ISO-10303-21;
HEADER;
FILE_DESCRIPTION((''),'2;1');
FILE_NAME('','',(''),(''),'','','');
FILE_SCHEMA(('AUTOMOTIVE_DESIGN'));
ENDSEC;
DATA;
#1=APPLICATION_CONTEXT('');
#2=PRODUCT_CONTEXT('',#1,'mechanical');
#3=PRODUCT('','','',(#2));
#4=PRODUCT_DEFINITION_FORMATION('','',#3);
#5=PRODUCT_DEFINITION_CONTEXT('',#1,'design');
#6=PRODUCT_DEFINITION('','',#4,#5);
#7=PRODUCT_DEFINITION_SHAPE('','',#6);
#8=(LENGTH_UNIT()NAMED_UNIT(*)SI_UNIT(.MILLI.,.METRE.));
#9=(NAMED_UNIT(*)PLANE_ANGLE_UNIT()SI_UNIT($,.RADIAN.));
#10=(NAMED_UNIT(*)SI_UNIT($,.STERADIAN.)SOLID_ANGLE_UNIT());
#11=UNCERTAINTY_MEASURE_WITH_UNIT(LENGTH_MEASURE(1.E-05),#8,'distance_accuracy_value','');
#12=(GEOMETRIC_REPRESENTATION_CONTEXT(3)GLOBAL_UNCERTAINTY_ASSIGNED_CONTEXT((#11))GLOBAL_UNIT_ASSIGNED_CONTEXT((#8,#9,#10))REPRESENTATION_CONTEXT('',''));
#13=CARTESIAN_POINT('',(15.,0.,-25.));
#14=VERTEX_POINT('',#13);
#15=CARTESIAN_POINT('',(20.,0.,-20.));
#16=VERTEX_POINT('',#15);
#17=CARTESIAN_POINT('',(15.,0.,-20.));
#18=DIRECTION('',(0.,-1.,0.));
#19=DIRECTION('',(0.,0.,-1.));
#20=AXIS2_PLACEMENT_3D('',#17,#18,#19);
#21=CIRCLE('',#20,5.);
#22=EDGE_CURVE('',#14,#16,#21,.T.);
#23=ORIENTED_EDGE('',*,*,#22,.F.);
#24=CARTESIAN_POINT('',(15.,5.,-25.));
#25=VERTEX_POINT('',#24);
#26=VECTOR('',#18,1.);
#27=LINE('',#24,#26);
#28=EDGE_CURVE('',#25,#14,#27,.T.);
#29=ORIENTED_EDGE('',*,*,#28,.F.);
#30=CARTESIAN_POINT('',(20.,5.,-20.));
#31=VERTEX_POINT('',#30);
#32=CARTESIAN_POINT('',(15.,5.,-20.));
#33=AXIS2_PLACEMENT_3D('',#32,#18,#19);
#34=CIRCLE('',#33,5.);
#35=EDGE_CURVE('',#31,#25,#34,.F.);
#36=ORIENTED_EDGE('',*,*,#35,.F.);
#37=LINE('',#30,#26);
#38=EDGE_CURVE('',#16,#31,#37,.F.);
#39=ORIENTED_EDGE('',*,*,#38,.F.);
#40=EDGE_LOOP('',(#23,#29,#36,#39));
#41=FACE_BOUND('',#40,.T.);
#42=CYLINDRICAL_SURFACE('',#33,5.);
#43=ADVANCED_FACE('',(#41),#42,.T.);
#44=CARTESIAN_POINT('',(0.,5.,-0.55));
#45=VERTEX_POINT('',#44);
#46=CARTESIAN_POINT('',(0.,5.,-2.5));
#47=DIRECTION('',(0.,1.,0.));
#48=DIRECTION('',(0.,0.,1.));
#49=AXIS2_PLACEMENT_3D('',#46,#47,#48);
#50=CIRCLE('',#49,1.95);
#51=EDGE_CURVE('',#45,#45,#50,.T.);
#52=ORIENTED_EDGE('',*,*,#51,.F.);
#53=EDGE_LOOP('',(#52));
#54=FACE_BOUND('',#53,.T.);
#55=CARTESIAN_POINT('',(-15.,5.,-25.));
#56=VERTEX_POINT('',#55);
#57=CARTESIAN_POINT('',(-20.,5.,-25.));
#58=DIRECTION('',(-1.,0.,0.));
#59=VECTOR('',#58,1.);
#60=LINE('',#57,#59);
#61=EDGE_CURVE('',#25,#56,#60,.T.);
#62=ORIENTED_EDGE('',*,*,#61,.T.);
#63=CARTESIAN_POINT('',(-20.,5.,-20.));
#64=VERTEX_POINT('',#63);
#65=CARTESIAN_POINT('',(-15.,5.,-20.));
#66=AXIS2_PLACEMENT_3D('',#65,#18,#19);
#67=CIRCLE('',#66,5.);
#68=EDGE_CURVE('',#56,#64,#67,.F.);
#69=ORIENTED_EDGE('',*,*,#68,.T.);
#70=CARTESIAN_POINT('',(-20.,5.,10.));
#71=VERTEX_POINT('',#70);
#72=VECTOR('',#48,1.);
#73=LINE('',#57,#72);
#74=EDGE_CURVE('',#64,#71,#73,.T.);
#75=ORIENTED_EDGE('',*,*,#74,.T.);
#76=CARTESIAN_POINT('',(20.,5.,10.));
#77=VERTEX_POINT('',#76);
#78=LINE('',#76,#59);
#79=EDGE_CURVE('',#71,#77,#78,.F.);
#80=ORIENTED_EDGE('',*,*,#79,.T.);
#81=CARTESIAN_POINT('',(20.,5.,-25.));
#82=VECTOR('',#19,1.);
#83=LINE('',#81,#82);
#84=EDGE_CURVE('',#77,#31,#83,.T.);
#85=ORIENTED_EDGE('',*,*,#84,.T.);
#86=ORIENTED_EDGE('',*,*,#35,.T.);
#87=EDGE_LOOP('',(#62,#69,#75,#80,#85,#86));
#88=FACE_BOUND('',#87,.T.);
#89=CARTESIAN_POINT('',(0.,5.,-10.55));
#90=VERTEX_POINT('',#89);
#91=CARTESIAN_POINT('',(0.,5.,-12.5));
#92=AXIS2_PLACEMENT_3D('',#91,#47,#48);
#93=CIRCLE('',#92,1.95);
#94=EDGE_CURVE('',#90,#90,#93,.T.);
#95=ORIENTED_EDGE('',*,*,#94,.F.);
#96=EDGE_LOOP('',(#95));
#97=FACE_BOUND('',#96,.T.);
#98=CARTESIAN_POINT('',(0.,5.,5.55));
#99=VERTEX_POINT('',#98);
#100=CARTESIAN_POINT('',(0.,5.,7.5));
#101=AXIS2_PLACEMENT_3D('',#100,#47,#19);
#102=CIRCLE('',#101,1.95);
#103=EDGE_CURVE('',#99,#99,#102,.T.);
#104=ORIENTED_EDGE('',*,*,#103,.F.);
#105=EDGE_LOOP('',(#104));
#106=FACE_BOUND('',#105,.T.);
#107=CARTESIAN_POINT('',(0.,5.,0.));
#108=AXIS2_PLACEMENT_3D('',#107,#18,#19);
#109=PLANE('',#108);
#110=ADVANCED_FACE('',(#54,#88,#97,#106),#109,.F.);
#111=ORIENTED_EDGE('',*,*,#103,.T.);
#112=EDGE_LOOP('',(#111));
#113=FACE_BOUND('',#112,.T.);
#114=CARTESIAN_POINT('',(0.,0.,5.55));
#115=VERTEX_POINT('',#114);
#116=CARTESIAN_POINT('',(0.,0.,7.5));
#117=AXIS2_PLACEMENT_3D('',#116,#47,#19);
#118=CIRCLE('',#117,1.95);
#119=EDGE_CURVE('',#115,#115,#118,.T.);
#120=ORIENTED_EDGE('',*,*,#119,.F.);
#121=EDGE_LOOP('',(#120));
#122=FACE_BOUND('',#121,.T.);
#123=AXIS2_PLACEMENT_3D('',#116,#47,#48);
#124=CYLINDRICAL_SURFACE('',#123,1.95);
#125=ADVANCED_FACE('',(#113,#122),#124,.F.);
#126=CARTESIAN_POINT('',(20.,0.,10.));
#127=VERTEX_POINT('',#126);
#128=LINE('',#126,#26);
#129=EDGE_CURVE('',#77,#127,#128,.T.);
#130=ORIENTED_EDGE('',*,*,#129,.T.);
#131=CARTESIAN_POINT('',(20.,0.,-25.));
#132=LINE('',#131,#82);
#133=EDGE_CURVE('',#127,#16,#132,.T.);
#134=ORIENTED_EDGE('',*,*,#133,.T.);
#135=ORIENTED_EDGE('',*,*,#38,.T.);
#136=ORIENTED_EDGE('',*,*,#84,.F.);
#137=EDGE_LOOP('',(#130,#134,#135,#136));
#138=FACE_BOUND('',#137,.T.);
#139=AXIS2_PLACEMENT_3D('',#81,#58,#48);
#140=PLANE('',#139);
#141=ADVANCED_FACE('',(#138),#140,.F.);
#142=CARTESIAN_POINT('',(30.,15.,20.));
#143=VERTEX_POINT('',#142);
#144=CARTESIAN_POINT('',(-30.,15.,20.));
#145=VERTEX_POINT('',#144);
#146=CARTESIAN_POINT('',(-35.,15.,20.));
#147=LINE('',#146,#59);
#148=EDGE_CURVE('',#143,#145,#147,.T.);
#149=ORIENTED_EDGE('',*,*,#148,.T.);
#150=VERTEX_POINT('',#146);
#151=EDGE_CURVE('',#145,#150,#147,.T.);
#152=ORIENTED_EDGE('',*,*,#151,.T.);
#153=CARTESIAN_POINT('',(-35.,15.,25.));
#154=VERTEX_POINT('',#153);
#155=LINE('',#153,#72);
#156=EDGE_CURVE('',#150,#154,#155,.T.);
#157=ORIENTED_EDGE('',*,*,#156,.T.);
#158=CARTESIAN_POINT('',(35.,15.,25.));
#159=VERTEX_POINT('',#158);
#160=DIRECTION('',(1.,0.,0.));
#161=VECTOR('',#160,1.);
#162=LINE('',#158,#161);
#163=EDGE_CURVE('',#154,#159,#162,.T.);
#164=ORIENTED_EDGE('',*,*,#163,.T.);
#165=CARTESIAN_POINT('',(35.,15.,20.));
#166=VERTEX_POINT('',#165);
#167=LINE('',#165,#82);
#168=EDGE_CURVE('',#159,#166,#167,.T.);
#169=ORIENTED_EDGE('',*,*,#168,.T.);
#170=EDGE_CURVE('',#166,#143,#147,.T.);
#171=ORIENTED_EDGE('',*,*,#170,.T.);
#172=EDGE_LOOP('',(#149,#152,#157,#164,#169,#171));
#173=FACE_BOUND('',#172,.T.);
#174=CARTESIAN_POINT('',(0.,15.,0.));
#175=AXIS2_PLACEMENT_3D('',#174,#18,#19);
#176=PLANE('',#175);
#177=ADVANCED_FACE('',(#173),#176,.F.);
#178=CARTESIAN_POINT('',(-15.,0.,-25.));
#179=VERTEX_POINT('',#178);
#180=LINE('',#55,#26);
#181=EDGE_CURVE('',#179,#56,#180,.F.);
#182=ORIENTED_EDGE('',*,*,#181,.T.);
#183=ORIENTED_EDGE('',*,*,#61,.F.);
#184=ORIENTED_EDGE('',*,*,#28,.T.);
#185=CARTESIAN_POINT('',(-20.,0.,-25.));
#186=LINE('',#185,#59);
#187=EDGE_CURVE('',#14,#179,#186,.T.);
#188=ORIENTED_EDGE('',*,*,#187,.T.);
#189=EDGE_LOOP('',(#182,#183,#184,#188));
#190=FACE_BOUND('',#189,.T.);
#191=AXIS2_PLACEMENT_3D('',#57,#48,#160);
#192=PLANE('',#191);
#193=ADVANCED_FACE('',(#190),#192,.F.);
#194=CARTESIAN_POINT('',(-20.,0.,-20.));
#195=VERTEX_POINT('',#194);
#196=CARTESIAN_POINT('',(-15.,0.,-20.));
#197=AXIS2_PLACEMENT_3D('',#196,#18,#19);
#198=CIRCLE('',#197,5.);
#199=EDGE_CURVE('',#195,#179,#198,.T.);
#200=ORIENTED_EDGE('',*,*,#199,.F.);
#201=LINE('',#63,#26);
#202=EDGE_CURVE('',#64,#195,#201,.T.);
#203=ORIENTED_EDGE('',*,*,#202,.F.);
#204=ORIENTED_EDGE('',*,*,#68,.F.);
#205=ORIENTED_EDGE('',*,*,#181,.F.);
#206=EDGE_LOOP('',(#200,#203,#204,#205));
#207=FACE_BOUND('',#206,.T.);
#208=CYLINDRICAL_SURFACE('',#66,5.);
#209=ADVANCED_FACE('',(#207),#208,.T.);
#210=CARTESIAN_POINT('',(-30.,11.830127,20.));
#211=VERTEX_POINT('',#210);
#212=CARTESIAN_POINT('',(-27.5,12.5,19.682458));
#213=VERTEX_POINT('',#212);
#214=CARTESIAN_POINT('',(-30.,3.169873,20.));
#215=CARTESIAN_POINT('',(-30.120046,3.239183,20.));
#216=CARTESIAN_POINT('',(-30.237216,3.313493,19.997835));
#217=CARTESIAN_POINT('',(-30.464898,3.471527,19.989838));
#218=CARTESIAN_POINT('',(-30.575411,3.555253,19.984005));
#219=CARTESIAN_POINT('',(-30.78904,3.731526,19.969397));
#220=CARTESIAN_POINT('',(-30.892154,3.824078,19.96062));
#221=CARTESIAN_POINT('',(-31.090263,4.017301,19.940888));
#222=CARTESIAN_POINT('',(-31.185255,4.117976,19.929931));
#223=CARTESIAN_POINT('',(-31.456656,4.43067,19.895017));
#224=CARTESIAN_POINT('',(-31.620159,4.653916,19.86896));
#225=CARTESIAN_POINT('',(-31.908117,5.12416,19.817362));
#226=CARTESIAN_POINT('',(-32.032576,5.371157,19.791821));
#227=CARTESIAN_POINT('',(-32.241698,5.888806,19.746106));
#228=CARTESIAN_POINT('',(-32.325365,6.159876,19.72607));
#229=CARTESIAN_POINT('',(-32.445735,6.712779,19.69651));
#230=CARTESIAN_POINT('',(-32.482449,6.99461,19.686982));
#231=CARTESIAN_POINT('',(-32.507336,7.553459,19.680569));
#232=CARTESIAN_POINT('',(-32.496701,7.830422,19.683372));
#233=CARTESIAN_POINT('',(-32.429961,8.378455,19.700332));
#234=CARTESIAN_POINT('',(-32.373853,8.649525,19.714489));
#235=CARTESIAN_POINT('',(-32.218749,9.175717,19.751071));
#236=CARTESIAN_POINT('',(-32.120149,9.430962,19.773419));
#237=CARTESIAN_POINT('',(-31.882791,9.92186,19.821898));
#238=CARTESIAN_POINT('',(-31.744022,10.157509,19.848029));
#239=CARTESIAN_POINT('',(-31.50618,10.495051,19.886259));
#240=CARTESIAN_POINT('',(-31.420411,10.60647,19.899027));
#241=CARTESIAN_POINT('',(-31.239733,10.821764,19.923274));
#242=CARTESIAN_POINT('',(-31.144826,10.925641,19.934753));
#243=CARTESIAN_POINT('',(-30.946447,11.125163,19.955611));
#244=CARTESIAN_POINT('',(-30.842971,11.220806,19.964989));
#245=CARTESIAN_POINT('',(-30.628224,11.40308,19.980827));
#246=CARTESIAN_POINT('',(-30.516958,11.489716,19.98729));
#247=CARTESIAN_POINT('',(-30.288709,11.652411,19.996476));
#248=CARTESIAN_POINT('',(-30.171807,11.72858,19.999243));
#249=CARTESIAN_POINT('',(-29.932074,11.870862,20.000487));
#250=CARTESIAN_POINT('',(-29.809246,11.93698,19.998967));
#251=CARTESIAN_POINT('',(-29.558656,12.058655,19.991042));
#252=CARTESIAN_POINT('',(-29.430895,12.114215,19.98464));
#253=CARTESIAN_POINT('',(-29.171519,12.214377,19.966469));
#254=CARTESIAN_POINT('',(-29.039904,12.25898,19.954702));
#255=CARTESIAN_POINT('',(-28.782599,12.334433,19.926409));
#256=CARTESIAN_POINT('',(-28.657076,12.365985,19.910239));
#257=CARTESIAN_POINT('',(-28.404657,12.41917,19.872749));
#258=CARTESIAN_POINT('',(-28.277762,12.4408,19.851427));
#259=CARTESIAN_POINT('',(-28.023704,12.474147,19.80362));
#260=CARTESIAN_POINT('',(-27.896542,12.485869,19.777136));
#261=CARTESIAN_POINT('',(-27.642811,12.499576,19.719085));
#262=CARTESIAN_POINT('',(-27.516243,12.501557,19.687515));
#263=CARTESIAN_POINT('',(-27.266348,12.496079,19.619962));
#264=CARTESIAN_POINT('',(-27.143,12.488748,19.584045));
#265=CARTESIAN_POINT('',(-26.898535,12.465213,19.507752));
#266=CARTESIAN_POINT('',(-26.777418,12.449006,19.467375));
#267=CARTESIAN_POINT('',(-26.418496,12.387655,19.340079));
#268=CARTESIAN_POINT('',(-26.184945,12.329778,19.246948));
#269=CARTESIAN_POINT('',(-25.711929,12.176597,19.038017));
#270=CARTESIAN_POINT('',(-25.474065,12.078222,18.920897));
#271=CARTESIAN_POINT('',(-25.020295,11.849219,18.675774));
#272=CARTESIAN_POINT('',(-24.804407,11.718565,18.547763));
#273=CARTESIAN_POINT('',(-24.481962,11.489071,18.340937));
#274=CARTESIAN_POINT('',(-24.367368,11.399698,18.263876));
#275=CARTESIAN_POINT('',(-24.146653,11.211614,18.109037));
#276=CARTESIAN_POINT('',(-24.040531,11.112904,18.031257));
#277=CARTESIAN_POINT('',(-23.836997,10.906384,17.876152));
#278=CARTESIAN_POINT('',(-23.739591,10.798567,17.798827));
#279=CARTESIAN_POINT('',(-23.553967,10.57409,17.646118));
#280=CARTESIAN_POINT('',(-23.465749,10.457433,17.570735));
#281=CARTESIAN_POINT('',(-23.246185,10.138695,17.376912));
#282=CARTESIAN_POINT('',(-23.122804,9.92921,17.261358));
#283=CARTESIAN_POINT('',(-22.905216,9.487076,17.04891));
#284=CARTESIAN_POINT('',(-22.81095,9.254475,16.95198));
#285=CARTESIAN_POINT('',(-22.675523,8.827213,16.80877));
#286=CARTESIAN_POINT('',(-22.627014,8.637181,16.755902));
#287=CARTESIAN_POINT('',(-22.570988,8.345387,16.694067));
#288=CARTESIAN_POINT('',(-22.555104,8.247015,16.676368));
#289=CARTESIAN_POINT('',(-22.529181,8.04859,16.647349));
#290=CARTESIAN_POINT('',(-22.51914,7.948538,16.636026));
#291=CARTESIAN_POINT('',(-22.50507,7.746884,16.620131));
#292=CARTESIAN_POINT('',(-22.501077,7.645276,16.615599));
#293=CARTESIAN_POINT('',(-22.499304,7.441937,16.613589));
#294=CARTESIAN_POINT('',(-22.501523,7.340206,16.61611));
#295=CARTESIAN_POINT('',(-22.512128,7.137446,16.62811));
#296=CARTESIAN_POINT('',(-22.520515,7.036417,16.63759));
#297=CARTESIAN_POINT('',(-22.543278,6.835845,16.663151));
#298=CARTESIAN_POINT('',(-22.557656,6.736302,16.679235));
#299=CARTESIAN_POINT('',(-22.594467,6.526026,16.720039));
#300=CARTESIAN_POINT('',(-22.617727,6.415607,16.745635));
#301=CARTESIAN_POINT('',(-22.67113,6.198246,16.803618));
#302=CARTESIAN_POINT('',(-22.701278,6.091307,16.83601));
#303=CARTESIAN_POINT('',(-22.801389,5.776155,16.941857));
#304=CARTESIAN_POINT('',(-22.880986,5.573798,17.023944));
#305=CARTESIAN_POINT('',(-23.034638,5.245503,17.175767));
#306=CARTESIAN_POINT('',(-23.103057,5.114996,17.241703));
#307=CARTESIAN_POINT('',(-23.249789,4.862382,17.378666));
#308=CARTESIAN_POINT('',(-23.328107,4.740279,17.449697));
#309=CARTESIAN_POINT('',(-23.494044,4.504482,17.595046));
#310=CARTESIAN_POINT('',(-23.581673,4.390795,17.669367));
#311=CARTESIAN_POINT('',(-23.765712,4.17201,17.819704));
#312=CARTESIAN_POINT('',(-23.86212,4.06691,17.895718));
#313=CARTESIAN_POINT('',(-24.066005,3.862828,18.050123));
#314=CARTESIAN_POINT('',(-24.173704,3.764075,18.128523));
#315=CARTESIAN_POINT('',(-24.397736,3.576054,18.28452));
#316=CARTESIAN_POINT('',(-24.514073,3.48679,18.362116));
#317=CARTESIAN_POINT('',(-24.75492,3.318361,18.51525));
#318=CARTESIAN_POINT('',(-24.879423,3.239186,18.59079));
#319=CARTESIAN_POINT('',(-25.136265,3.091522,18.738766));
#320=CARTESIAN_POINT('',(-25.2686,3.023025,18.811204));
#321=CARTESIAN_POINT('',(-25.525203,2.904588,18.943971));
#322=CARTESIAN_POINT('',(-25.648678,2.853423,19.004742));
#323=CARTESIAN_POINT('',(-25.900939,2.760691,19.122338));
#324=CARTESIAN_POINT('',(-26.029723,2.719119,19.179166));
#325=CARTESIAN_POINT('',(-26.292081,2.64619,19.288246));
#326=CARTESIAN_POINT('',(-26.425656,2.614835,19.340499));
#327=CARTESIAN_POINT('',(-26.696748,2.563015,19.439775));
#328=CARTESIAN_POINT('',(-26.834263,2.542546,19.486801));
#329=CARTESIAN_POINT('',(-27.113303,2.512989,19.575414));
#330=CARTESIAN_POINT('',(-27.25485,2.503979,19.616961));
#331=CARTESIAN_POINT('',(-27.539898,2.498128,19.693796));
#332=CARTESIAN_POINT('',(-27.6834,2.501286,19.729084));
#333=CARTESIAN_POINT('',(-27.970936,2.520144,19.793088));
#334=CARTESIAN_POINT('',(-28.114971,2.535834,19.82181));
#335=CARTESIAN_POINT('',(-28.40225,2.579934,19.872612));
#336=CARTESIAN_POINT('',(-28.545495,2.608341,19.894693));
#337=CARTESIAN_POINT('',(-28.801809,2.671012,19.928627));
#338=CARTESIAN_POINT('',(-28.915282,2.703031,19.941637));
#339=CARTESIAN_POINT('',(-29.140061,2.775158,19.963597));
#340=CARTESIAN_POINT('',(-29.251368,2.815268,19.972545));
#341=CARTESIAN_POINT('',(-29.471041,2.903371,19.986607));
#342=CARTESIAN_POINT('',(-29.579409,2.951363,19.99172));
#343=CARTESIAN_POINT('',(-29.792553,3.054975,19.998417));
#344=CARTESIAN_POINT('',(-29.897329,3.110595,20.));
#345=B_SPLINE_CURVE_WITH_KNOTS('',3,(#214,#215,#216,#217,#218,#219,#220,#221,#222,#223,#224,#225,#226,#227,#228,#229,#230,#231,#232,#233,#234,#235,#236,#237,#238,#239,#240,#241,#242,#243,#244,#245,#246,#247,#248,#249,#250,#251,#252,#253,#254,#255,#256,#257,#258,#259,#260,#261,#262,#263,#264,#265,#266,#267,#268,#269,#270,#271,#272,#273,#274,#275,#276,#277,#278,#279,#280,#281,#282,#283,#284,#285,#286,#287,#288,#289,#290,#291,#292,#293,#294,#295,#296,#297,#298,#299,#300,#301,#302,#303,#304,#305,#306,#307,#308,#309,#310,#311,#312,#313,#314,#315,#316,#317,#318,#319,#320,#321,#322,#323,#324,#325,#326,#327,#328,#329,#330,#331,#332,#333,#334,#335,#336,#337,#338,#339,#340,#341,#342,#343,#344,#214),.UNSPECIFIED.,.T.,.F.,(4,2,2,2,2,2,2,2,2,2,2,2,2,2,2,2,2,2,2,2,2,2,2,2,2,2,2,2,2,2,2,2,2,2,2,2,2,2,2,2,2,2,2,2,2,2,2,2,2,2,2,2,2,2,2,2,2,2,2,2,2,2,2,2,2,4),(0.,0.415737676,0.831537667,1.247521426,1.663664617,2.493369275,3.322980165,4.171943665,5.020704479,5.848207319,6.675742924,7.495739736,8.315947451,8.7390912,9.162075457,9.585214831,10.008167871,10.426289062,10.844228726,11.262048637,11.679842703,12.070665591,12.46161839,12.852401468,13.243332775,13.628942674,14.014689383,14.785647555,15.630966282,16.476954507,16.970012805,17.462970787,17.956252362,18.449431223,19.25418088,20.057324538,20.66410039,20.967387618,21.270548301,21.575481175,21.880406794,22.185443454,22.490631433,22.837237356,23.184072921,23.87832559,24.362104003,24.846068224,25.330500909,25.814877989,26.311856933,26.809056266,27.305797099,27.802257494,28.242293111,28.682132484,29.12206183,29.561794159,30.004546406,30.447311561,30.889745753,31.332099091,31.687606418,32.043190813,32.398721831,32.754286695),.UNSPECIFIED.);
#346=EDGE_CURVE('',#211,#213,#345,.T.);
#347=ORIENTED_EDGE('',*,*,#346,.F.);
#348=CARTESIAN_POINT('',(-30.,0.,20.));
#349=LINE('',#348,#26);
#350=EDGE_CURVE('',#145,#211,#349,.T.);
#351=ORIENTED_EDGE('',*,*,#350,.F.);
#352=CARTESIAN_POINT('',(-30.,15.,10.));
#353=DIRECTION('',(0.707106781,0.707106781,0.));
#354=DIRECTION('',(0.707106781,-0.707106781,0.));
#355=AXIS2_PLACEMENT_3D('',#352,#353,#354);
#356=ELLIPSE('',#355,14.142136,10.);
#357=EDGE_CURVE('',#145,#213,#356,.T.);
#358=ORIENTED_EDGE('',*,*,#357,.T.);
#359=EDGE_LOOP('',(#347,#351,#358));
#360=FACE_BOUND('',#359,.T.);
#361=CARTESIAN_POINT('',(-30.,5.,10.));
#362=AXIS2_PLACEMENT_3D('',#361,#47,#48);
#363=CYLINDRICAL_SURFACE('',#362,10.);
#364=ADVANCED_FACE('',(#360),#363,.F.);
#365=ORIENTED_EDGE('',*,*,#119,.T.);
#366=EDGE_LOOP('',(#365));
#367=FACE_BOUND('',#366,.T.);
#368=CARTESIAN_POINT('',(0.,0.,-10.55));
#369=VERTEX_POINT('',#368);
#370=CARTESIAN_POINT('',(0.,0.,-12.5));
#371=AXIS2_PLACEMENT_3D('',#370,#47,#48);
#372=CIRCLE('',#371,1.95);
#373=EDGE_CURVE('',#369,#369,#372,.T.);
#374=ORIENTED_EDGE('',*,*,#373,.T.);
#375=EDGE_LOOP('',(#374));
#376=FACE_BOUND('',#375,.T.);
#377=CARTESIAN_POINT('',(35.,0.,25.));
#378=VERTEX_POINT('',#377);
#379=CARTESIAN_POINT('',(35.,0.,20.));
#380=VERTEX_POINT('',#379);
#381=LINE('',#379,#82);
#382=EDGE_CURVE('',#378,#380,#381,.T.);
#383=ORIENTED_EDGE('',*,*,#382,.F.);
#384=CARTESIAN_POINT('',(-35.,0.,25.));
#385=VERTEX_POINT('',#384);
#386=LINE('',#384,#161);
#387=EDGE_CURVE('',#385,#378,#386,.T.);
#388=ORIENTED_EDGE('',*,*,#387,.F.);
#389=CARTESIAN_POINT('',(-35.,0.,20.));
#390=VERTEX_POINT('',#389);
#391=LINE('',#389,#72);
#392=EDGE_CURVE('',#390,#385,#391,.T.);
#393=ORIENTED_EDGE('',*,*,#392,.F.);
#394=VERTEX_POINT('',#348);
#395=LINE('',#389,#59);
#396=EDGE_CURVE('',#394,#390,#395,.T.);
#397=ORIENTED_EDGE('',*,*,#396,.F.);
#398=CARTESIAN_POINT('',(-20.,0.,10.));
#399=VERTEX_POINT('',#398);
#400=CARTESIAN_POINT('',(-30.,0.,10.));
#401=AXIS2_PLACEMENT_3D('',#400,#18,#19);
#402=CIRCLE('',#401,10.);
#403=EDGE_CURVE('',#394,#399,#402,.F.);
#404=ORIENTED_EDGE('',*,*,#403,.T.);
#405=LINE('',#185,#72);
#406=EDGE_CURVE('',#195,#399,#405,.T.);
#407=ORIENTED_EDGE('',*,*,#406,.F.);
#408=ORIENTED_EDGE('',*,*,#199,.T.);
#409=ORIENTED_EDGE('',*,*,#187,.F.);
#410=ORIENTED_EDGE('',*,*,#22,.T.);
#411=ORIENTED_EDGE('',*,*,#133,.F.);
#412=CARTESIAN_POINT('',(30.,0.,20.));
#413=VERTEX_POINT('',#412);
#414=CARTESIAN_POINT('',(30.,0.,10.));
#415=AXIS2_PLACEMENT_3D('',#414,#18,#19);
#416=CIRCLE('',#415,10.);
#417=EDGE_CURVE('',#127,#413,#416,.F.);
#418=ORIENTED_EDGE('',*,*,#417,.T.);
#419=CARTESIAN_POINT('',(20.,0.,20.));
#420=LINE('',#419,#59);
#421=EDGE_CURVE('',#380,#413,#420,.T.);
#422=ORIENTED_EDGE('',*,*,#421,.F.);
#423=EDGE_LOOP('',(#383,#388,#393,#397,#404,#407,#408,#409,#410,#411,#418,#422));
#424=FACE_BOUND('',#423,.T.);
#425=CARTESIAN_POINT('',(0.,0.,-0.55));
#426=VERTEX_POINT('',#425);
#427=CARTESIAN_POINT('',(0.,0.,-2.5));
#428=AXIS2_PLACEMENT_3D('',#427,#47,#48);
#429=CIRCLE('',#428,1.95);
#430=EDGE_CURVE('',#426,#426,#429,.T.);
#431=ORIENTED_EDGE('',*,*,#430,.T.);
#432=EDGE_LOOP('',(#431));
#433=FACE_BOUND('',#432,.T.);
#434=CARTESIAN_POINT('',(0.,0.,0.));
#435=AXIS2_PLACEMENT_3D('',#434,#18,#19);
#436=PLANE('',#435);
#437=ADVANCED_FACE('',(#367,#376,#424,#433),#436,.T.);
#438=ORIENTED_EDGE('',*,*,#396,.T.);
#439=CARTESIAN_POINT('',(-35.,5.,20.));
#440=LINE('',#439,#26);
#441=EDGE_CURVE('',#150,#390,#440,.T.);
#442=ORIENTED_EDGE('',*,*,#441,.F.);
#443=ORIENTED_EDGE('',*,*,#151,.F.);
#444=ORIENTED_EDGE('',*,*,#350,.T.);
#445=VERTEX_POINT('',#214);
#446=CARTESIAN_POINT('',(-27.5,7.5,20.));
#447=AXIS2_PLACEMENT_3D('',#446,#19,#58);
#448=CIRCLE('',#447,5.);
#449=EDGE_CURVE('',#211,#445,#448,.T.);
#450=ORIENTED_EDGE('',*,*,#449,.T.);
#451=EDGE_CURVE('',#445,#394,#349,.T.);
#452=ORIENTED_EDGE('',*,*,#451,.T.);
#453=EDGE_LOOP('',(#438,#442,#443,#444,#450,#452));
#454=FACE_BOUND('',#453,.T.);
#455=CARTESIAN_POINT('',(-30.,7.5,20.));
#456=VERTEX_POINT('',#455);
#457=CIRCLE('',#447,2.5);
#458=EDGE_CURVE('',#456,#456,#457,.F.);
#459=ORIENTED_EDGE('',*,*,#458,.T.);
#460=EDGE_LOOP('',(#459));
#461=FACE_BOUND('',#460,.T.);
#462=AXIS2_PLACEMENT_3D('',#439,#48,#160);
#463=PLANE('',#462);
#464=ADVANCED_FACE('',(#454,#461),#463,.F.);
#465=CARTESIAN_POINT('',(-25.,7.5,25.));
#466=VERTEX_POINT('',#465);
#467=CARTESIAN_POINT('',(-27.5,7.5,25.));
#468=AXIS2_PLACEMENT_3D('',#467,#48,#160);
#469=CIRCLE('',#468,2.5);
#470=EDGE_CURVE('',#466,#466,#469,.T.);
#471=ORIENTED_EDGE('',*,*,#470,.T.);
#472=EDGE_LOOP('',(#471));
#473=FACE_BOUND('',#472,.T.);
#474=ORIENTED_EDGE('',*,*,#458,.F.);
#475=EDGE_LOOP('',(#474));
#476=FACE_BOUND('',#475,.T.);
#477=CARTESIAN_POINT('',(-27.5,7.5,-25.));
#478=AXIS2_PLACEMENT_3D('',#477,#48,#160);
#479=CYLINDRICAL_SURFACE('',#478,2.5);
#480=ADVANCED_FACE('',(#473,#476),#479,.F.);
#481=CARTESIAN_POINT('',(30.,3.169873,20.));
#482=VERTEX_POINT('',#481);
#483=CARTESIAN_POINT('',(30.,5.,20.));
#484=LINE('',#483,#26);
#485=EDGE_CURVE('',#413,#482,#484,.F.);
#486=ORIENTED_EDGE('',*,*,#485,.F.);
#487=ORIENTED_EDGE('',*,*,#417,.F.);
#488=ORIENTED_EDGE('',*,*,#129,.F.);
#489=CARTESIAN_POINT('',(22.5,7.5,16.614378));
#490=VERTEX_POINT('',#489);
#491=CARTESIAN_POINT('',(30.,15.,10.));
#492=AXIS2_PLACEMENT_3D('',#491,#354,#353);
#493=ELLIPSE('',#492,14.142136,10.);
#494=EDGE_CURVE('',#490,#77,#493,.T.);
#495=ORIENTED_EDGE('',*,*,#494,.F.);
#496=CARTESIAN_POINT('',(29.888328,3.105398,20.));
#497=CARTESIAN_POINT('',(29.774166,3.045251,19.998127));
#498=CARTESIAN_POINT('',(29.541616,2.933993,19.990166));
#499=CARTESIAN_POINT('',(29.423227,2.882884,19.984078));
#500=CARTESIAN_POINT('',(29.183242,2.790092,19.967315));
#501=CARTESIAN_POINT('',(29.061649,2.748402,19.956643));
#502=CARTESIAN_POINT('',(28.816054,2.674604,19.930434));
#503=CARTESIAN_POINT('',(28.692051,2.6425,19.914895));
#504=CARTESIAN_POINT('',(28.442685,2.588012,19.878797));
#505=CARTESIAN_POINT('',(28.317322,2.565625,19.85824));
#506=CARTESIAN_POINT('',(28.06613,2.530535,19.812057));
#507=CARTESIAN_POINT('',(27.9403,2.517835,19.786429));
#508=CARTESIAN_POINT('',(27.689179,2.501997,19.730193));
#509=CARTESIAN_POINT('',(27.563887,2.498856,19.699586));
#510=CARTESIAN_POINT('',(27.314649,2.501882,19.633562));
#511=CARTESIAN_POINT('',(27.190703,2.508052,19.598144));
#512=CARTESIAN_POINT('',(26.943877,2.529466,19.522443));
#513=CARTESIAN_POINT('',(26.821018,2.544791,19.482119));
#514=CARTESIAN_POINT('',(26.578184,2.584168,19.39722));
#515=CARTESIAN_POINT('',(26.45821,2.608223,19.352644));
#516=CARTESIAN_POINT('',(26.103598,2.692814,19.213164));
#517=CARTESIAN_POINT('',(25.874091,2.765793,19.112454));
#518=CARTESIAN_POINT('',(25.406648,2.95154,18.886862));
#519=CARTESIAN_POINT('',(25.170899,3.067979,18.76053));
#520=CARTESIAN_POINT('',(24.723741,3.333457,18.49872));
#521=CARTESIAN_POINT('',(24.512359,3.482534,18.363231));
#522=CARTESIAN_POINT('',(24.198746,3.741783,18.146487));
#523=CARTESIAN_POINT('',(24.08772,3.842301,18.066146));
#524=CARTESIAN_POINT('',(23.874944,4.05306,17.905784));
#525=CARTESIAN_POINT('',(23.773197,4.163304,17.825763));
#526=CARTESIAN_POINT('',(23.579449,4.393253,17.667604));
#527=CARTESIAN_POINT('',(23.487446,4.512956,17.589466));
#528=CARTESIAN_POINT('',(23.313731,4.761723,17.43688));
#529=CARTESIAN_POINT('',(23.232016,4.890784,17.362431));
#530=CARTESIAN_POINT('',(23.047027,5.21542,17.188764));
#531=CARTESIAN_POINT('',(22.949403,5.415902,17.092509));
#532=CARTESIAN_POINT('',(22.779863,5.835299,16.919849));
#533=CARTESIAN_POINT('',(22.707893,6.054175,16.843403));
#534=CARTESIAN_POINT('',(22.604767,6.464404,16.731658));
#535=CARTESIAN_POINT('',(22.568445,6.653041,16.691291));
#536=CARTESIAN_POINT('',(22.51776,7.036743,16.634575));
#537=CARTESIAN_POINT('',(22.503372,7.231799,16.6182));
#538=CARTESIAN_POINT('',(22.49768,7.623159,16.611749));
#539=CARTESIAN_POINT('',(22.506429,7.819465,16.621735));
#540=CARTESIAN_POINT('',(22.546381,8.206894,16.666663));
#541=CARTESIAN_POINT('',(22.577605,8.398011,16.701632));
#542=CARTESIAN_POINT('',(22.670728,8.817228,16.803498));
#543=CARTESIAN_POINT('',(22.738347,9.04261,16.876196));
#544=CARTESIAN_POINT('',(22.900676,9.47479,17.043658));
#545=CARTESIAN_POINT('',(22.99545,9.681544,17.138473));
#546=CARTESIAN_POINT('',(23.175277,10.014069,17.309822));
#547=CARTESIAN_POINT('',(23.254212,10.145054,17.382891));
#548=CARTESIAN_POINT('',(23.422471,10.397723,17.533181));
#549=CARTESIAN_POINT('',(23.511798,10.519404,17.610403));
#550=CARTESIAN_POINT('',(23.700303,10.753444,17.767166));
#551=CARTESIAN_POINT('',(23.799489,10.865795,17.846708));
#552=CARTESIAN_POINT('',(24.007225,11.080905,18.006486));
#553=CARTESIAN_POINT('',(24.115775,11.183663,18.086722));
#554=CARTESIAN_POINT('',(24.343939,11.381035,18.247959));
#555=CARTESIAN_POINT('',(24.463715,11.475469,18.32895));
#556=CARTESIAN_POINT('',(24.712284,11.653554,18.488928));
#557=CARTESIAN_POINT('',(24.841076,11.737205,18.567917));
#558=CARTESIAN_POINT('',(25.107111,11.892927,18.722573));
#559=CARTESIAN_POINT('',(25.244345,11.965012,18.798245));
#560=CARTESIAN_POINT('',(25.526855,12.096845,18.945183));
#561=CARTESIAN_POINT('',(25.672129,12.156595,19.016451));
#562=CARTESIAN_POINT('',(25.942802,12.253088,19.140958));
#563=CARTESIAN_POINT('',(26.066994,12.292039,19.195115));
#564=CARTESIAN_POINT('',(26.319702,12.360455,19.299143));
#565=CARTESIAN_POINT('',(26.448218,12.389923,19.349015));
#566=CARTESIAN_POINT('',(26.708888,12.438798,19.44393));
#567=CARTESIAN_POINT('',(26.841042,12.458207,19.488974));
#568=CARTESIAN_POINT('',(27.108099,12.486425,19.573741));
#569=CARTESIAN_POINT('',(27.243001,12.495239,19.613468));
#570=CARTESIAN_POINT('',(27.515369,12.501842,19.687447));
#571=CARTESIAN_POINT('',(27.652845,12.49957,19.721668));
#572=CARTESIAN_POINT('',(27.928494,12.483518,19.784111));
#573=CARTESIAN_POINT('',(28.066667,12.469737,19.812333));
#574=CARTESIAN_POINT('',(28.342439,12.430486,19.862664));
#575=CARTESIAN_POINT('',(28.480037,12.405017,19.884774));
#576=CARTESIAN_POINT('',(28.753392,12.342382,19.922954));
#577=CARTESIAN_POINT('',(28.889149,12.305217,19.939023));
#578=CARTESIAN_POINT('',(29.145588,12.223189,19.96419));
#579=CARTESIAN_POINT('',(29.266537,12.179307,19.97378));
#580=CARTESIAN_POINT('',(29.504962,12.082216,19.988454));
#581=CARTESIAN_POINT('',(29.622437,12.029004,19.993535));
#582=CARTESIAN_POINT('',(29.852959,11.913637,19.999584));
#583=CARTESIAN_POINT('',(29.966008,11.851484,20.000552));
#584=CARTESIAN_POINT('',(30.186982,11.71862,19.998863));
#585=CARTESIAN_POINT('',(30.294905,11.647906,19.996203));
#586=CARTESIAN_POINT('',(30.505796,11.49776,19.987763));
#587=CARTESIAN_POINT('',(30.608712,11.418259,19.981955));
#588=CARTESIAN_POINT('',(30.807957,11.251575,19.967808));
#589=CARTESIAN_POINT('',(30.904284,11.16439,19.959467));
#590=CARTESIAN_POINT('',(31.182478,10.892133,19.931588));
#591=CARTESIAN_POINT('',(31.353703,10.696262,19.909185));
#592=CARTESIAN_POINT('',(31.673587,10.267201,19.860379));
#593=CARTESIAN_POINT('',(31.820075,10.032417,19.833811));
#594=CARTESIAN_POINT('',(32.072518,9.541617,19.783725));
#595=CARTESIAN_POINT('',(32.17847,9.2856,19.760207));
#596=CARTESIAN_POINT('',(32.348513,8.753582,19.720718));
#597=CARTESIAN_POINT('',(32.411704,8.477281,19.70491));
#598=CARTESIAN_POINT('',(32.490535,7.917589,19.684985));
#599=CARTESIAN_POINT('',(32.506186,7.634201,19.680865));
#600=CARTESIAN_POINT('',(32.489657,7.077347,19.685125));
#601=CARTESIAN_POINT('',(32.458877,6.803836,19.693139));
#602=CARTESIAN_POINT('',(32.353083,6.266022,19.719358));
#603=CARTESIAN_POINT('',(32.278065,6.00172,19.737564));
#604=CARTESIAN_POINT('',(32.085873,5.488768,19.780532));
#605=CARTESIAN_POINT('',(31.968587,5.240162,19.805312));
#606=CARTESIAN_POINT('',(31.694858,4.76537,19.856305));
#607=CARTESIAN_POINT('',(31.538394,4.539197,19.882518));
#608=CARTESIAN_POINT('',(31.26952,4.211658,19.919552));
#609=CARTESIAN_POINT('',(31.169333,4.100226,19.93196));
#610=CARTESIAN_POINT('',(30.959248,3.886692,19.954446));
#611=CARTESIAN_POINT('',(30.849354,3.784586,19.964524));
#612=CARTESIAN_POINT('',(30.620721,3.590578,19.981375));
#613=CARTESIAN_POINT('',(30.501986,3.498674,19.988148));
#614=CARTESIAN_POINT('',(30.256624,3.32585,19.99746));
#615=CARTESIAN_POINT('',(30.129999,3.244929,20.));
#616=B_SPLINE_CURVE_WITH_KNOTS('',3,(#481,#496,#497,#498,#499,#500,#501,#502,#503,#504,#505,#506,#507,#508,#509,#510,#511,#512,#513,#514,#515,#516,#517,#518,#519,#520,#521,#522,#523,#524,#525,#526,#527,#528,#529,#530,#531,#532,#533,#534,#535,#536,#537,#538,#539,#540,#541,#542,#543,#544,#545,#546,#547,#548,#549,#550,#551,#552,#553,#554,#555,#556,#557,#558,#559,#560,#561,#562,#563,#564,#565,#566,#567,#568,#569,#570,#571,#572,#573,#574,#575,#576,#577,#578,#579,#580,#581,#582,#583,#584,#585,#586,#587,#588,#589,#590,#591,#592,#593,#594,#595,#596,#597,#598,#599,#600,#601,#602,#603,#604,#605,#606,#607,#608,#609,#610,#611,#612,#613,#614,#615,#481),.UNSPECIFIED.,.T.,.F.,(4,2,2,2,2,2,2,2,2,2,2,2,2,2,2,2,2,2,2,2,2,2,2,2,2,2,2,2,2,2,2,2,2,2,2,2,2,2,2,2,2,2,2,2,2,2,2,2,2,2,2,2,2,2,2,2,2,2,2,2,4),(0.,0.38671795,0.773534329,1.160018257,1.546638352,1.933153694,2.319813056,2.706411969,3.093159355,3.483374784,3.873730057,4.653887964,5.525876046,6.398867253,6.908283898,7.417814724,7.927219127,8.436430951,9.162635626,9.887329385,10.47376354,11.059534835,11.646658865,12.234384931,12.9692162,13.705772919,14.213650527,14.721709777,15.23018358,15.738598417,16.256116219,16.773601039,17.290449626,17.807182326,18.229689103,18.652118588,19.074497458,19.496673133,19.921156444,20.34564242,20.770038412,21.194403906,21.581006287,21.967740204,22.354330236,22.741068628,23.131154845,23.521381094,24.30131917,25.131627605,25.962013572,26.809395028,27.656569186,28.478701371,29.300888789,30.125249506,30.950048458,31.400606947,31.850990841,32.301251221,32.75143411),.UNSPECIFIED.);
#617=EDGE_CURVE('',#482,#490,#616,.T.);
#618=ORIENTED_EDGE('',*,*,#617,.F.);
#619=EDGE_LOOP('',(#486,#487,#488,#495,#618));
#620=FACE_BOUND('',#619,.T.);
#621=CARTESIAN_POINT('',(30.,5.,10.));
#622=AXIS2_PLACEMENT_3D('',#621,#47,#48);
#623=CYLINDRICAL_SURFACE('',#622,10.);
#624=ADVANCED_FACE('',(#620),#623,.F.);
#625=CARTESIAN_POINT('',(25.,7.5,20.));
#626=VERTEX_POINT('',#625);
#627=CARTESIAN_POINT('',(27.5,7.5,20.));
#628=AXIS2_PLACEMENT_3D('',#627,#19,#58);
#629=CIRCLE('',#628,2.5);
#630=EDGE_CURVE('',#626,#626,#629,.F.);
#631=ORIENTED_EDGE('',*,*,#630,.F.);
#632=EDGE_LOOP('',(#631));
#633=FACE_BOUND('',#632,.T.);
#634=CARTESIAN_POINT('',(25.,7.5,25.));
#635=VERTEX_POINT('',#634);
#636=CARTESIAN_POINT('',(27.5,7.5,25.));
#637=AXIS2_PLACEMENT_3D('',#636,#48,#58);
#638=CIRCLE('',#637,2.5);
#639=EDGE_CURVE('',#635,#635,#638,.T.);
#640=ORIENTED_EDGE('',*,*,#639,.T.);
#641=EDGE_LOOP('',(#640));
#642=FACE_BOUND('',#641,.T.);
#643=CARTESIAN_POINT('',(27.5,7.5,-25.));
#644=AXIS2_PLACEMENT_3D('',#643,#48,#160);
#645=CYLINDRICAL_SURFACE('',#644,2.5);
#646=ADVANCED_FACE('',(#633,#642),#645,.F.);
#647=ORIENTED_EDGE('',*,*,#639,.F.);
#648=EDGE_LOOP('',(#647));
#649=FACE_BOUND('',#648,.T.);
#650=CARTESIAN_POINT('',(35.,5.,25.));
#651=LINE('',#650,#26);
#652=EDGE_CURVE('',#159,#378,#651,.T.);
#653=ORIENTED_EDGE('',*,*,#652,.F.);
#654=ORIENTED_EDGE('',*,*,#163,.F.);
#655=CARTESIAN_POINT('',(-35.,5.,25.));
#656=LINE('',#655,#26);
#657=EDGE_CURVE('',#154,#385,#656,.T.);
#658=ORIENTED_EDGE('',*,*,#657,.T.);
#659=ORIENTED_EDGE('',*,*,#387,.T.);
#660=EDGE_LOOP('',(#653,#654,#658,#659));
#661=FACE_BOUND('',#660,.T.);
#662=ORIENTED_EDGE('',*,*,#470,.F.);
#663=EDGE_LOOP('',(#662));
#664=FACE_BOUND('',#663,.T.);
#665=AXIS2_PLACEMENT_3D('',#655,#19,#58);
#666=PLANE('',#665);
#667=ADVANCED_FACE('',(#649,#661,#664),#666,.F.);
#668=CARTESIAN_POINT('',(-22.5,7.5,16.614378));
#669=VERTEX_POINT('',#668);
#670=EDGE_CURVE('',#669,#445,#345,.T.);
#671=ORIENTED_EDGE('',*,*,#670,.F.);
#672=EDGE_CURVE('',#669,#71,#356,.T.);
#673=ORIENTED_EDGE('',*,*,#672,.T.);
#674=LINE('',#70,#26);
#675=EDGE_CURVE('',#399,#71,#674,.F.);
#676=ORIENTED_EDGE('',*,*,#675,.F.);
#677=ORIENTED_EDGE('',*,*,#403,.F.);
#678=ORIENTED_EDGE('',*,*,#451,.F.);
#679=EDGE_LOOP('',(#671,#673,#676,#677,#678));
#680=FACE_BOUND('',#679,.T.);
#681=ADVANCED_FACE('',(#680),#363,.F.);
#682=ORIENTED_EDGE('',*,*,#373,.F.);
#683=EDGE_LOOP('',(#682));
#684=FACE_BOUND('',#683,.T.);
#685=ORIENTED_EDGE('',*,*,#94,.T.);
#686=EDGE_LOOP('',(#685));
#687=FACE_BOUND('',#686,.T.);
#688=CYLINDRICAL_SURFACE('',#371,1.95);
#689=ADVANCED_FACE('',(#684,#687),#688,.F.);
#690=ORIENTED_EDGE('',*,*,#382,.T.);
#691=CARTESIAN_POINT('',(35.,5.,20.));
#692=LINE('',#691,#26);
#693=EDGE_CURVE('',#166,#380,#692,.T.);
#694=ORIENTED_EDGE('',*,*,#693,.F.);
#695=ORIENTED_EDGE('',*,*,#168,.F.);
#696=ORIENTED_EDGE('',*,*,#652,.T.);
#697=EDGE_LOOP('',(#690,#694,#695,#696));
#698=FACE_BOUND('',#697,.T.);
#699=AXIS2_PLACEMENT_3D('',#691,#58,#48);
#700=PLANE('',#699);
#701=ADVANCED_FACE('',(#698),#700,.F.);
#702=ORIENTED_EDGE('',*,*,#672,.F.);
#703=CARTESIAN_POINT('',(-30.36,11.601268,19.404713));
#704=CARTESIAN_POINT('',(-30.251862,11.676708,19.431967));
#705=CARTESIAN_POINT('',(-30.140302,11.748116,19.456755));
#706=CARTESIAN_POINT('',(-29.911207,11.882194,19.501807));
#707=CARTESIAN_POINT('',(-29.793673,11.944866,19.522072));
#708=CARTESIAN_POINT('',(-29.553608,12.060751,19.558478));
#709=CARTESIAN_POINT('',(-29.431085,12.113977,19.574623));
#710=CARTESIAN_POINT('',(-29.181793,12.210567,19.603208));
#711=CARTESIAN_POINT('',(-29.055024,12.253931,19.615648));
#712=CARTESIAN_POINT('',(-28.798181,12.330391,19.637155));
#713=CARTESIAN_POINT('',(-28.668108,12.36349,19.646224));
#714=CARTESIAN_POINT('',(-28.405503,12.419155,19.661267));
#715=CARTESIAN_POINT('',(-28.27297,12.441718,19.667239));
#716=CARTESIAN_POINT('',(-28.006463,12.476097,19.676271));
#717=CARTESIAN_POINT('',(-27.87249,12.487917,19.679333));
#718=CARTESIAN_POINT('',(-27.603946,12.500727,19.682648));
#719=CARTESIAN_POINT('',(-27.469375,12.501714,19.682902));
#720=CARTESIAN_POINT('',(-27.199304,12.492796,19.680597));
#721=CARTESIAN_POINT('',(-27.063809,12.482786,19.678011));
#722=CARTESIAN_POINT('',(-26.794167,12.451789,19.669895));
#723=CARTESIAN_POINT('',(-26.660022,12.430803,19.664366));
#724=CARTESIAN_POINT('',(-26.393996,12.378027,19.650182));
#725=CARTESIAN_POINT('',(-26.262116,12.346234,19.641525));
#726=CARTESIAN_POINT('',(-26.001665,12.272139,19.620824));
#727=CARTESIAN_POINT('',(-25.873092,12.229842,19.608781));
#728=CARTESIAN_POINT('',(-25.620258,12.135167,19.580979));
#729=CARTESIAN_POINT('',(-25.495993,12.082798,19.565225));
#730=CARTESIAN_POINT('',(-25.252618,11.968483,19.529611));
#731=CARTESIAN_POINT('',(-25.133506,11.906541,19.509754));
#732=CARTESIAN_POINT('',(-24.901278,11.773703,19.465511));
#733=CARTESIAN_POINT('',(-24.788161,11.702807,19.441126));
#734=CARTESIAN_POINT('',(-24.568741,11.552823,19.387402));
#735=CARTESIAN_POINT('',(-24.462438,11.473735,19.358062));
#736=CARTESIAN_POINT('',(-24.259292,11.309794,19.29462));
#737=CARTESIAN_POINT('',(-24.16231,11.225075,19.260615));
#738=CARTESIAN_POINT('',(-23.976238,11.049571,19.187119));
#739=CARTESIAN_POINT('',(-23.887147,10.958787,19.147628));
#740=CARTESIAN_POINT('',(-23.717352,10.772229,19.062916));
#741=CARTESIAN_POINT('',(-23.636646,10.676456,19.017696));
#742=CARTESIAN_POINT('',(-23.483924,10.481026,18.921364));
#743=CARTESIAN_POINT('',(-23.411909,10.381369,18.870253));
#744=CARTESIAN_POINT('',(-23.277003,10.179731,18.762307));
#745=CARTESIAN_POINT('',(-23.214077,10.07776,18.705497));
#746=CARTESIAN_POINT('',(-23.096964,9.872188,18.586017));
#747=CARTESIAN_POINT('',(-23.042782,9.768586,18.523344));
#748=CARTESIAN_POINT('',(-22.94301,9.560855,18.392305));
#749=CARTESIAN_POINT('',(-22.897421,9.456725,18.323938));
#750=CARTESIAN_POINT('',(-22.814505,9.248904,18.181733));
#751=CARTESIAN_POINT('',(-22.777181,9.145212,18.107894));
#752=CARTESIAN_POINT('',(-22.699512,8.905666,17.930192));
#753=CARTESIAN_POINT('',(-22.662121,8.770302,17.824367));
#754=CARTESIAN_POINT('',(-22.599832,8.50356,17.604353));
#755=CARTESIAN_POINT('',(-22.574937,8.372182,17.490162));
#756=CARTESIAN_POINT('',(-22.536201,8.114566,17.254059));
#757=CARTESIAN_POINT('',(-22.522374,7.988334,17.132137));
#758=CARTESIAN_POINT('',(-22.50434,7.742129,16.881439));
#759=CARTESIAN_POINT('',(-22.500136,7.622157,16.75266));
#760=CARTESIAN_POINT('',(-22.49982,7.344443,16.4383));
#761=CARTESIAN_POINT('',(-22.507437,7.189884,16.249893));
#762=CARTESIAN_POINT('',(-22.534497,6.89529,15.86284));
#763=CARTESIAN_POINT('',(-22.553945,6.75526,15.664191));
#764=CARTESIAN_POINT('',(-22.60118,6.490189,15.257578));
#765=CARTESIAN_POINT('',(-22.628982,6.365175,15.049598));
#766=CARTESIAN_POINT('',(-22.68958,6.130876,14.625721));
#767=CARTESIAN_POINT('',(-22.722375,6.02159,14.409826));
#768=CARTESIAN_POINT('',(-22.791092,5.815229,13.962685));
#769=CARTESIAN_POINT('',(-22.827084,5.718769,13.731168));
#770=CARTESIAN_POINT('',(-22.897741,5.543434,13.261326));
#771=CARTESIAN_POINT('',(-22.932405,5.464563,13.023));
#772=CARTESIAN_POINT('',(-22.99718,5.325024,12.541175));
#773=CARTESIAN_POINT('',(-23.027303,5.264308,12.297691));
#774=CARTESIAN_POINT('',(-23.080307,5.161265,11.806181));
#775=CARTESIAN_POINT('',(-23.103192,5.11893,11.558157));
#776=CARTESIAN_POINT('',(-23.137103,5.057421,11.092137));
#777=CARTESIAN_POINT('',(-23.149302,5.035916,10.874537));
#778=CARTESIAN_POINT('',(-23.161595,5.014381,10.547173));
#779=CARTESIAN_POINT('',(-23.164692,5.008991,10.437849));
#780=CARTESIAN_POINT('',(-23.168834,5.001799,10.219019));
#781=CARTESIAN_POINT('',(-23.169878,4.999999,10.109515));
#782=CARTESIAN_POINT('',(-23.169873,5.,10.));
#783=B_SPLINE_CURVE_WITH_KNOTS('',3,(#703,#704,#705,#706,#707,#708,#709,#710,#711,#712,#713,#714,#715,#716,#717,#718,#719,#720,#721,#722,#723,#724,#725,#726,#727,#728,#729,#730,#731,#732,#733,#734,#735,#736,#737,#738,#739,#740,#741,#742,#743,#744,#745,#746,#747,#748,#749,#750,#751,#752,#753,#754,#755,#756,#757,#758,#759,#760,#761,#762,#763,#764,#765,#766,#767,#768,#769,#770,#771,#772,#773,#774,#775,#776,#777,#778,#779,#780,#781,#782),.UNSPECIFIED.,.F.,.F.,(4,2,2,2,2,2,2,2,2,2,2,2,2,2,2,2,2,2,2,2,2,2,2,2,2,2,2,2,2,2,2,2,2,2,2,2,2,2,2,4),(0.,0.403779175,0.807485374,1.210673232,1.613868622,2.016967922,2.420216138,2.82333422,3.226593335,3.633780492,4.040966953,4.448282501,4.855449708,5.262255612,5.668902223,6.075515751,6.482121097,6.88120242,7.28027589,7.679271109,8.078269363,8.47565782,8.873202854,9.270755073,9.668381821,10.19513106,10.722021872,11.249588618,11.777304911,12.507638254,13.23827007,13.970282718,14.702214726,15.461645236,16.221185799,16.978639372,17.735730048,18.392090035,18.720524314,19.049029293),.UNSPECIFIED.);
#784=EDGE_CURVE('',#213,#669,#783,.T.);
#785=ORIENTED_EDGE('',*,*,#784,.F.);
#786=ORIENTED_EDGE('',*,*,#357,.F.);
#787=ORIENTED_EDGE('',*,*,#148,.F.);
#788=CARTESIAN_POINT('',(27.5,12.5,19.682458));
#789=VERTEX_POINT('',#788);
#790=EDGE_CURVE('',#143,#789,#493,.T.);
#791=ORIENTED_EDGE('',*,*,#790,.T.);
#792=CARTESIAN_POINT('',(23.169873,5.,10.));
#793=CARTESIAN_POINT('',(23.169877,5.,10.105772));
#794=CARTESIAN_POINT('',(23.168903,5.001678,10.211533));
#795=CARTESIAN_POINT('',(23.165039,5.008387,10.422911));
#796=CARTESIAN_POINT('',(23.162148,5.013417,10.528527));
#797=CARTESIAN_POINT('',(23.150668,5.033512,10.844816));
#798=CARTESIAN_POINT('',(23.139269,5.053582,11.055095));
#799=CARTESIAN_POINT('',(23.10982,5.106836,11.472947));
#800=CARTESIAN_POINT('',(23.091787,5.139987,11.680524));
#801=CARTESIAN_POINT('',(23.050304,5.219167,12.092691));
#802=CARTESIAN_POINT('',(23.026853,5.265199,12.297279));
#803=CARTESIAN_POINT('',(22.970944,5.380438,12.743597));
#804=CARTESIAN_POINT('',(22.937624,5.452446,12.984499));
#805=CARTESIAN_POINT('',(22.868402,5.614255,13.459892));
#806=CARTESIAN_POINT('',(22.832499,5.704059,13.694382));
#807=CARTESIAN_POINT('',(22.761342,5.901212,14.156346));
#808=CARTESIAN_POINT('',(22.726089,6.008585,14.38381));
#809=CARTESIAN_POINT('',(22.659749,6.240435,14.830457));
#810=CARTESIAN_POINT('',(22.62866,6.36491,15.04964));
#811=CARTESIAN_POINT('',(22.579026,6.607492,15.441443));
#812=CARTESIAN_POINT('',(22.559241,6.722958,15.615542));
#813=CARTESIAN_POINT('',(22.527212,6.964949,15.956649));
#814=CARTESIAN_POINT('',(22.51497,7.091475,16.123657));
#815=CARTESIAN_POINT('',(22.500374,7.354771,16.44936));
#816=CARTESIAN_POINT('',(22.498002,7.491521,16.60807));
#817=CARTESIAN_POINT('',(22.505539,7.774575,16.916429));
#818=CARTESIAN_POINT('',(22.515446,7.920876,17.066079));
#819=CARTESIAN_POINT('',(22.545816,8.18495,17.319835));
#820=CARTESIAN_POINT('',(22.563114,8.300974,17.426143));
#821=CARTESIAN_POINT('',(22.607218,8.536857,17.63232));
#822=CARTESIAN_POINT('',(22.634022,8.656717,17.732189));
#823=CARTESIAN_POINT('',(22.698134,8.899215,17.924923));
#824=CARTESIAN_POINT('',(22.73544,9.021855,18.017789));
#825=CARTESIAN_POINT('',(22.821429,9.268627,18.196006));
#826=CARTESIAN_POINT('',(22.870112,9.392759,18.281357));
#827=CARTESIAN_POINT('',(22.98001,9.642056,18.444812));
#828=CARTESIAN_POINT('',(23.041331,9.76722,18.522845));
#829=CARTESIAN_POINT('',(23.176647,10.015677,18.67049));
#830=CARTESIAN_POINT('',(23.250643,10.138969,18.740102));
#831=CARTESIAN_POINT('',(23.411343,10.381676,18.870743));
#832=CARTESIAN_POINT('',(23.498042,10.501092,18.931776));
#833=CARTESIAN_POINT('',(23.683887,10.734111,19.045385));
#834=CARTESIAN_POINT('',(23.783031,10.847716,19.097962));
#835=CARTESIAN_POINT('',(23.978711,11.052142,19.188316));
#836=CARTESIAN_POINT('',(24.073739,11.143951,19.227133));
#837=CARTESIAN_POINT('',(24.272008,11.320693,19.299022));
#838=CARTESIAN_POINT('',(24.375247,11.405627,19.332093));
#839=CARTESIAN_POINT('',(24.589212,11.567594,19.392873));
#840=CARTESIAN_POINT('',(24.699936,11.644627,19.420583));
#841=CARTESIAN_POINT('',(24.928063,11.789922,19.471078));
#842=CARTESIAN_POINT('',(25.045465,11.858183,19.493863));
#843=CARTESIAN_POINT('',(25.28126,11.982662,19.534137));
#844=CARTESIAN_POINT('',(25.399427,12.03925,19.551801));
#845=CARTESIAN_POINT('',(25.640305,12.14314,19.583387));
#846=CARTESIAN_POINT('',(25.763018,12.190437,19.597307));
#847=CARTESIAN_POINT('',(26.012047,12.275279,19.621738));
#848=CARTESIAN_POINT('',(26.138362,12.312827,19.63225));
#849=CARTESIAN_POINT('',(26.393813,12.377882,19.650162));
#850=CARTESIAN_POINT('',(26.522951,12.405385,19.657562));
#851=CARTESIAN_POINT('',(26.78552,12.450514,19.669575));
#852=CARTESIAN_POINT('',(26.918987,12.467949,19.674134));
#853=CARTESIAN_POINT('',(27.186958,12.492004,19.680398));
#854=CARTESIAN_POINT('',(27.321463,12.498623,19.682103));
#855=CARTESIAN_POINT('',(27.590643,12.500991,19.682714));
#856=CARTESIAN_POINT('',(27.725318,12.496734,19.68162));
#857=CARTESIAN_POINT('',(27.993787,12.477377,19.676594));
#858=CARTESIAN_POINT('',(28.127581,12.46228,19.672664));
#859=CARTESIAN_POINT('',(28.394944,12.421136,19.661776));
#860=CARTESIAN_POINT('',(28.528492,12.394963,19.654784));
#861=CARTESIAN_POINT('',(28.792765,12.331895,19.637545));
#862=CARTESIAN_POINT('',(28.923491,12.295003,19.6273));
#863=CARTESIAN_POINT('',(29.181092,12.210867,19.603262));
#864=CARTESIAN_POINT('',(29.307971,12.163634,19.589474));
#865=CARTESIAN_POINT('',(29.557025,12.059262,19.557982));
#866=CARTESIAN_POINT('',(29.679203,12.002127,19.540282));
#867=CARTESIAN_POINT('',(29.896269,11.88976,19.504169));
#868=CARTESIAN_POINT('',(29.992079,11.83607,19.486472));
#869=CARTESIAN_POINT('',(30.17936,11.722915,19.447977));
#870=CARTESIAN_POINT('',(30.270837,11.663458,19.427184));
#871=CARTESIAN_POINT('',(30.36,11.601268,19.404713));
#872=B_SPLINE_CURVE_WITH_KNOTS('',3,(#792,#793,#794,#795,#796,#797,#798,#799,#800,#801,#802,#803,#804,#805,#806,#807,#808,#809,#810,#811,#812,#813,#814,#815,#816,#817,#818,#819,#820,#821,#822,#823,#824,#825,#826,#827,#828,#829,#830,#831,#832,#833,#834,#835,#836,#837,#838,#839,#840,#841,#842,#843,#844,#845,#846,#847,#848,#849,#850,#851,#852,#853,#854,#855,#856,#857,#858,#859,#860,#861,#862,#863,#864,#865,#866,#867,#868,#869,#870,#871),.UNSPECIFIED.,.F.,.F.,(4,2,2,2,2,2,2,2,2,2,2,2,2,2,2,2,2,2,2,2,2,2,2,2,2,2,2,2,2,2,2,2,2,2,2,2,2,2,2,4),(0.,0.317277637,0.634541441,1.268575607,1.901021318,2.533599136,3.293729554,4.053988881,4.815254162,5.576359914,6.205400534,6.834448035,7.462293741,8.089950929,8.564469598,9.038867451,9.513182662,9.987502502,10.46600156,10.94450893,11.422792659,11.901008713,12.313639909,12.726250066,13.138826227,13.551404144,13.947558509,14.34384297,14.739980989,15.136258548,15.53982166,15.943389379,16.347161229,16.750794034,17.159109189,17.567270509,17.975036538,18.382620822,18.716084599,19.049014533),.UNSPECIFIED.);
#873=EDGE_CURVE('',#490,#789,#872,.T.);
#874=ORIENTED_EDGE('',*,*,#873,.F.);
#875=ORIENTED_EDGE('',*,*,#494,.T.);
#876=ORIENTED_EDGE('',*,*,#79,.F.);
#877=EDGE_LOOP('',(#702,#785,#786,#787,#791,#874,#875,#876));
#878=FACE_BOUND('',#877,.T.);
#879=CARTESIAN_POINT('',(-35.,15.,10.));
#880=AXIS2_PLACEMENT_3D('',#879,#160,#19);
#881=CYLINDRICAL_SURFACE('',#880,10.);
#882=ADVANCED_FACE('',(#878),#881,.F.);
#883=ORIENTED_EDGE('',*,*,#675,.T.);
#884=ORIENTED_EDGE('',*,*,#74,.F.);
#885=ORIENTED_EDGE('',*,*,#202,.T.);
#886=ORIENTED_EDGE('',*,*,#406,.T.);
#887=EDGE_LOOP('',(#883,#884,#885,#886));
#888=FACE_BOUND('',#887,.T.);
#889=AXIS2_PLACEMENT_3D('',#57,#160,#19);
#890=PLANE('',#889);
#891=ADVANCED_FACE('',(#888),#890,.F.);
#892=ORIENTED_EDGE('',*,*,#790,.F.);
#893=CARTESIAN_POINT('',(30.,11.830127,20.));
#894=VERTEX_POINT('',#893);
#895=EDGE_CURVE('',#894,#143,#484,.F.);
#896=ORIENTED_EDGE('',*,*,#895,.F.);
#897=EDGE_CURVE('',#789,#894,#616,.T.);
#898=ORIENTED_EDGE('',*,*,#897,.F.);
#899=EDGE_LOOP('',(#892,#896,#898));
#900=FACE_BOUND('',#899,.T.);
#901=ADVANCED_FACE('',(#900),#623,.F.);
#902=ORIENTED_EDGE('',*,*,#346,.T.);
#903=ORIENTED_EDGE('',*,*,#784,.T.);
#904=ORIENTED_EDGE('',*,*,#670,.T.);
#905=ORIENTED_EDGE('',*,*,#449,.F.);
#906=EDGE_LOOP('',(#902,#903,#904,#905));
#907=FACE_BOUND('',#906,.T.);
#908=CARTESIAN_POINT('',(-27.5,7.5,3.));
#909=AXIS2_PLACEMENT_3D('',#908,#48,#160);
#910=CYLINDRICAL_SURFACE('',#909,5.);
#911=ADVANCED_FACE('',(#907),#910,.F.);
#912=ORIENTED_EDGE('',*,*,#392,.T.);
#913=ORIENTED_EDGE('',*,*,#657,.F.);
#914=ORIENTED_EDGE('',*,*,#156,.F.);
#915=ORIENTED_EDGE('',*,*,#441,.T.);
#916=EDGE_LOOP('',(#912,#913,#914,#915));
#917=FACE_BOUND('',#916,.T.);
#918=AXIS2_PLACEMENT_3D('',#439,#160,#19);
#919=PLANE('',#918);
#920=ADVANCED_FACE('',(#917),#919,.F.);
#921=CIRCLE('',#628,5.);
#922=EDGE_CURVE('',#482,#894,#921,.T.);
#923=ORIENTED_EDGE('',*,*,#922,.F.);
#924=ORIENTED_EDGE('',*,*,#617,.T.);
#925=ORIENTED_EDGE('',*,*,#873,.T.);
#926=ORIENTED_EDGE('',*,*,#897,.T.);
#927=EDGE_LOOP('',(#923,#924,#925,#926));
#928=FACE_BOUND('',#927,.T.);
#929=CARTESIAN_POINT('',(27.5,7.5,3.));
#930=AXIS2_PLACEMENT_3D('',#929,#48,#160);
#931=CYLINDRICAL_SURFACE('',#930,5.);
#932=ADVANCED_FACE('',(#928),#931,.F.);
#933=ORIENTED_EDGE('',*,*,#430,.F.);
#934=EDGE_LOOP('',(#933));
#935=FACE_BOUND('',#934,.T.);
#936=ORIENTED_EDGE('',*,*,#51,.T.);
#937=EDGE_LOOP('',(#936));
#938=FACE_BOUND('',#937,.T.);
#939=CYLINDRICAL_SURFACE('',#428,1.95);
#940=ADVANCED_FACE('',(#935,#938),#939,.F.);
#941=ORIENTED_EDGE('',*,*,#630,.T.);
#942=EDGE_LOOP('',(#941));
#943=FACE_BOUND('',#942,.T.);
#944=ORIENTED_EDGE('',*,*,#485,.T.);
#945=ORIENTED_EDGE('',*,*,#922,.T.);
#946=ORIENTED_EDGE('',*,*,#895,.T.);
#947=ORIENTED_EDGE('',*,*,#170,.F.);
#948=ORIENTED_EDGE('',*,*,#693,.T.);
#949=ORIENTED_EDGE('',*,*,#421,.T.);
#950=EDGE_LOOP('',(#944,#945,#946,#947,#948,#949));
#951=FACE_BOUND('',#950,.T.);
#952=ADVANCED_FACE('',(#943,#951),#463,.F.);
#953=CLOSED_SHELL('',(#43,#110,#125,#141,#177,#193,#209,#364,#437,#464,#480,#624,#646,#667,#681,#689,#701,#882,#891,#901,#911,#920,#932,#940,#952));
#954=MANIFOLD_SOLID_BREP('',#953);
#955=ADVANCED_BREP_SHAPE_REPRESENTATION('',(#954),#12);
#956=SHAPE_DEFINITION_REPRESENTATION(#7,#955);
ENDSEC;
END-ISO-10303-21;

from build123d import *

# Parameters (mm, degrees)
BOSS_EXTRUDE1_DEPTH = 5
SKETCH2_W           = 70
SKETCH2_H           = 5
BOSS_EXTRUDE2_DEPTH = 10
SKETCH3_R           = 1.95
CUT_EXTRUDE1_DEPTH  = 45.158804332
FILLET1_R           = 10
SKETCH4_R           = 2.5
CUT_EXTRUDE2_DEPTH  = 63.84902545
SKETCH5_R           = 5
CUT_EXTRUDE3_DEPTH  = 17
FILLET2_R           = 5


with BuildPart() as part:
    # Sketch1 → Boss-Extrude1 (new body)
    with BuildSketch(Plane(origin=(0, 0, 0), x_dir=(1, 0, 0), z_dir=(0, 1, 0))):
        Polygon((-35, -25), (-20, -25), (20, -25), (35, -25), (35, -20), (20, -20), (20, 25), (-20, 25), (-20, -20), (-35, -20), align=None)
    extrude(amount=BOSS_EXTRUDE1_DEPTH)

    # Sketch2 → Boss-Extrude2 (add)
    with BuildSketch(Plane(origin=(0, 5, 0), x_dir=(1, 0, 0), z_dir=(0, 1, 0))):
        with Locations((0, -22.5)):
            Rectangle(SKETCH2_W, SKETCH2_H)
    extrude(amount=BOSS_EXTRUDE2_DEPTH)

    # Sketch3 → Cut-Extrude1 (cut, through all)
    with BuildSketch(Plane(origin=(0, 5, 0), x_dir=(1, 0, 0), z_dir=(0, 1, 0))):
        with Locations(Location((0, 12.5, 0), (0, 0, 270))):
            Circle(SKETCH3_R)
        with Locations(Location((0, -7.5, 0), (0, 0, 90))):
            Circle(SKETCH3_R)
        with Locations(Location((0, 2.5, 0), (0, 0, 270))):
            Circle(SKETCH3_R)
    extrude(amount=-CUT_EXTRUDE1_DEPTH, mode=Mode.SUBTRACT)

    # Fillet1
    fillet1_edges = [part.edges().sort_by_distance(p)[0] for p in [
        (-20, 2.5, 20),
        (20, 2.5, 20),
        (0, 5, 20),
    ]]
    fillet(fillet1_edges, radius=FILLET1_R - 0.0001)  # a hair under: the kernel refuses the full size

    # Sketch4 → Cut-Extrude2 (cut, through all)
    with BuildSketch(Plane.XY.offset(25)):
        with Locations((-27.5, 7.5)):
            Circle(SKETCH4_R)
        with Locations((27.5, 7.5)):
            Circle(SKETCH4_R)
    extrude(amount=-CUT_EXTRUDE2_DEPTH, mode=Mode.SUBTRACT)

    # Sketch5 → Cut-Extrude3 (cut)
    with BuildSketch(Plane(origin=(0, 0, 20), x_dir=(-1, 0, 0), z_dir=(0, 0, -1))):
        with Locations((27.5, 7.5)):
            Circle(SKETCH5_R)
        with Locations((-27.5, 7.5)):
            Circle(SKETCH5_R)
    extrude(amount=CUT_EXTRUDE3_DEPTH, mode=Mode.SUBTRACT)

    # Fillet2
    fillet2_edges = [part.edges().sort_by_distance(p)[0] for p in [
        (-20, 2.5, -25),
        (20, 2.5, -25),
    ]]
    fillet(fillet2_edges, radius=FILLET2_R)


solid = part.part
